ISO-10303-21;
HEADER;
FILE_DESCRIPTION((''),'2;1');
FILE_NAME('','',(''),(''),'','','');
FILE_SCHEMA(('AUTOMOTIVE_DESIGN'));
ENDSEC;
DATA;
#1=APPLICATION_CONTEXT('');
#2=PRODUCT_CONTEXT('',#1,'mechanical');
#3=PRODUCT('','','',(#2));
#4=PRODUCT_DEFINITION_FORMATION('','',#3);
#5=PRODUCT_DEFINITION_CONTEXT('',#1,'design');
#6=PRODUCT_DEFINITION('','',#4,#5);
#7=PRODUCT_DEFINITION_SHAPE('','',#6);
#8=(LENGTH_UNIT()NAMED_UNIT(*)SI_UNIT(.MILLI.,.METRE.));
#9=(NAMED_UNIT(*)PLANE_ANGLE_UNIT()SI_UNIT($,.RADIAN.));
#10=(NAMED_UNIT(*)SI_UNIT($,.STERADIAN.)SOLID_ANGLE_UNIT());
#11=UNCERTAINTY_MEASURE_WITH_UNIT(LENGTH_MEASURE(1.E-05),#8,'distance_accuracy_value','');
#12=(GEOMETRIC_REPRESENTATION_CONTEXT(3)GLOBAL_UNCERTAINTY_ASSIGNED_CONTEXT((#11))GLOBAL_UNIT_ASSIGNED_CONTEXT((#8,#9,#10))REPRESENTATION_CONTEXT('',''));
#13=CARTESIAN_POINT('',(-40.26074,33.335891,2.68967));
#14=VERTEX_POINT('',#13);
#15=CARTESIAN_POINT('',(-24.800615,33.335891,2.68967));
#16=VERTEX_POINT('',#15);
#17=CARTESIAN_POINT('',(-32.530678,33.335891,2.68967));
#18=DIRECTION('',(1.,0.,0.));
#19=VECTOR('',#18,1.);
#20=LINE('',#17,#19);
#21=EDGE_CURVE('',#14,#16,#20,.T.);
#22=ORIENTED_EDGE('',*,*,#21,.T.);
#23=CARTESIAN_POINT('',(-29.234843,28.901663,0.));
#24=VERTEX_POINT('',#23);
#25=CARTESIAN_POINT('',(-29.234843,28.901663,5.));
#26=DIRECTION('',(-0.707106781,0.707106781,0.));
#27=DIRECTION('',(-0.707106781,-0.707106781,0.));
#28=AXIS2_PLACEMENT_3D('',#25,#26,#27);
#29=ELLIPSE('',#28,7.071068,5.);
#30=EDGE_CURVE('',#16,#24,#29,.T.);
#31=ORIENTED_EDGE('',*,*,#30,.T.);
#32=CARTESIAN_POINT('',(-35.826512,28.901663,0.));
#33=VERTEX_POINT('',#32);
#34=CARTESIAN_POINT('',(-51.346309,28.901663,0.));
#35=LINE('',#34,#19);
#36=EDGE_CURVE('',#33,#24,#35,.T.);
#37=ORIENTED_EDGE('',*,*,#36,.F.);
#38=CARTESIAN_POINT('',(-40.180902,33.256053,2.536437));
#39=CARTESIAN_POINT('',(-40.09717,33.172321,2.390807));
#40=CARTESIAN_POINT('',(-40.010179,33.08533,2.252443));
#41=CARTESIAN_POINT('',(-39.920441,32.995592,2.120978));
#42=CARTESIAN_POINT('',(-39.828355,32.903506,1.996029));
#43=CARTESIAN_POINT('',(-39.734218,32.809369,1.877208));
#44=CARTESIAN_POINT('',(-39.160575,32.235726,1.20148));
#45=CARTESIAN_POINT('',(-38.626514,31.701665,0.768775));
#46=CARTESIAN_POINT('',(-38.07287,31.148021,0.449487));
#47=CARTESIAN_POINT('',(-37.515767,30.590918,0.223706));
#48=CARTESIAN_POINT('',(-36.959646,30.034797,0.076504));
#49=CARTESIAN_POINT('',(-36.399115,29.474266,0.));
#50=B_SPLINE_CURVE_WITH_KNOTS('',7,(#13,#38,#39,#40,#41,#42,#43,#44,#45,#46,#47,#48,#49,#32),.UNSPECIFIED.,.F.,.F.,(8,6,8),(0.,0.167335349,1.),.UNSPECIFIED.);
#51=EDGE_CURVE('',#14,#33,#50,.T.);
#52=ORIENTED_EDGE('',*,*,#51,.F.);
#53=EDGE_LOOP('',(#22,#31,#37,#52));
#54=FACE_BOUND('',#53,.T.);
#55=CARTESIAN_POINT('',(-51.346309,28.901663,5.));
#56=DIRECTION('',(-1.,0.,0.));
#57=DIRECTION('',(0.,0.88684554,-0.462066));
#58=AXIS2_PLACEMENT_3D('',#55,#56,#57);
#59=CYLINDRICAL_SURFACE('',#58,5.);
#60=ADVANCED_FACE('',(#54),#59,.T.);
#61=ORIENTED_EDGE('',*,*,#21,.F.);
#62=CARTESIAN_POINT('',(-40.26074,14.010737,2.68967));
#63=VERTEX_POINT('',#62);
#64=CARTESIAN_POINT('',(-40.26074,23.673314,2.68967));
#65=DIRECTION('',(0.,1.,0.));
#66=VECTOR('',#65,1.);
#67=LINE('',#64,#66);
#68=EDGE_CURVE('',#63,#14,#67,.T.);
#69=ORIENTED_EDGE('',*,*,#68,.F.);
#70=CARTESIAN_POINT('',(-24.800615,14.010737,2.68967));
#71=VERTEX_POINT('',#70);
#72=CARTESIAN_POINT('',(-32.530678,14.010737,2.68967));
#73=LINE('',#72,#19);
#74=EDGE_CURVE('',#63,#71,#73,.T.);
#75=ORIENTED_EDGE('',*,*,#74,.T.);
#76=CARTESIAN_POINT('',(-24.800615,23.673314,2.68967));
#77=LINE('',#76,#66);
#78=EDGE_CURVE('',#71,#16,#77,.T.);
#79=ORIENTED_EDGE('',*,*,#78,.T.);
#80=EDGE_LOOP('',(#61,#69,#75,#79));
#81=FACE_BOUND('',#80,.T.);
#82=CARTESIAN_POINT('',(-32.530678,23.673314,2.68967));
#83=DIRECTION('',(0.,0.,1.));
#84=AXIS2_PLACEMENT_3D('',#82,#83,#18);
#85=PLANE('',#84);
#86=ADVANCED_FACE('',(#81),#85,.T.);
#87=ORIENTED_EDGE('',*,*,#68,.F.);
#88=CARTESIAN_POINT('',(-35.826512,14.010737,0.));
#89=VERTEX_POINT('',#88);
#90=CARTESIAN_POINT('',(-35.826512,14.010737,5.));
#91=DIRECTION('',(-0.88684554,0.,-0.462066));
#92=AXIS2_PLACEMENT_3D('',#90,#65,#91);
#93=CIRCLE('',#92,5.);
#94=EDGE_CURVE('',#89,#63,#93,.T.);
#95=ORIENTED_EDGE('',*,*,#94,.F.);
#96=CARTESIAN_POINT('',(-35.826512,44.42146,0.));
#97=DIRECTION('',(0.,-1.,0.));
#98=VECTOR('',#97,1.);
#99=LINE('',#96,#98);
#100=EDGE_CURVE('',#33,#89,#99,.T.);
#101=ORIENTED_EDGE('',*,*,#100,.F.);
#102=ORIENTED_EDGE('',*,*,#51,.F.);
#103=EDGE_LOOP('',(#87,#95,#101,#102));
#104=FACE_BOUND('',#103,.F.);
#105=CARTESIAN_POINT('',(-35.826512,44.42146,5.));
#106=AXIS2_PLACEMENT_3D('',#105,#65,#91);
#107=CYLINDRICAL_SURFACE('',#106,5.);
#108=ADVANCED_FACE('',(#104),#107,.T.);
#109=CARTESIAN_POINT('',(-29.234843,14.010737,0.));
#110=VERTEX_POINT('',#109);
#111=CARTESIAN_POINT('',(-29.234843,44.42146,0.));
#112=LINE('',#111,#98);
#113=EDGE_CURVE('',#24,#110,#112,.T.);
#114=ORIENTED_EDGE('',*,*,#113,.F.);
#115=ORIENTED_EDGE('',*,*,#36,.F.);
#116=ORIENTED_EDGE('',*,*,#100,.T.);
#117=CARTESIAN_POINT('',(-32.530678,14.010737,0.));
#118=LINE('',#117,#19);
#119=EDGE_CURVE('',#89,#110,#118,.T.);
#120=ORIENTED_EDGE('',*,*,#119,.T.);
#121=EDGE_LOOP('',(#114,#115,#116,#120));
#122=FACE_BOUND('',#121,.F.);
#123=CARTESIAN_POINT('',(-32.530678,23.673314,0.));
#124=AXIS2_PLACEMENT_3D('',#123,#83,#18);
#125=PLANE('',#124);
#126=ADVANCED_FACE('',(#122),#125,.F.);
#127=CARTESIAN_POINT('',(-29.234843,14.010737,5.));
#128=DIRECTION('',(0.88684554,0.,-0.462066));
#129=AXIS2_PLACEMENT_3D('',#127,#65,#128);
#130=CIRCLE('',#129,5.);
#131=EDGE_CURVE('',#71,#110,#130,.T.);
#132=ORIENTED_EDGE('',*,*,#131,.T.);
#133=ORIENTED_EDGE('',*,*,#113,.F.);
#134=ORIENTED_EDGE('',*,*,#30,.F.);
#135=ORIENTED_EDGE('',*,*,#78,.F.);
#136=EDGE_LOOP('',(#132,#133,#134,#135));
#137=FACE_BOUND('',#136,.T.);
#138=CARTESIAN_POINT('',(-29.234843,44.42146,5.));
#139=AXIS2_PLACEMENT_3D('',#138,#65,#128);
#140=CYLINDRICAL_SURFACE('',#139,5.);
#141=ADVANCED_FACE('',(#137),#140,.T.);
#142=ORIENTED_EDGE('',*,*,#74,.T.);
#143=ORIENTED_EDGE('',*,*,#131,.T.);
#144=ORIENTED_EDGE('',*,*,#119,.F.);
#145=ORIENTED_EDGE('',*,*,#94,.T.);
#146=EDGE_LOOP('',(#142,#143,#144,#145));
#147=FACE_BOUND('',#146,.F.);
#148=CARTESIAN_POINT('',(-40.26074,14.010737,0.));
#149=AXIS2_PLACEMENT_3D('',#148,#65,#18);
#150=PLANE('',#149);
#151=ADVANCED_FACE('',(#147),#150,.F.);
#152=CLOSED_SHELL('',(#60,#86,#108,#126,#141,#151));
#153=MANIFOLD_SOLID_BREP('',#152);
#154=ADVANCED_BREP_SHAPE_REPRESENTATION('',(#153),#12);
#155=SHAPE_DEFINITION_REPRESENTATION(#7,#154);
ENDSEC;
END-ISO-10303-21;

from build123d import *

# Parameters (mm, degrees)
F0_W        = 15.4601242393
F0_H        = 19.3251539022
F1_DEPTH    = 2.68967
F2_T1_DEPTH = 37.6312627369
F2_T3_DEPTH = 41.4962923997


# Not quite as in the source:
# - a fillet or chamfer that OpenCascade refuses, or shapes differently, is made with other operations: its cross-section is extruded or revolved along the edge and cut away or added


with BuildPart() as f1:
    # F0 (on Top) → F1 (new body)
    with BuildSketch(Plane.XY):
        with Locations((-32.5306775048, 23.6733136699)):
            Rectangle(F0_W, F0_H)
    extrude(amount=F1_DEPTH)

    # F2: fillet of radius 5 on 3 edges, made by hand

    # F2_s2 → F2_t1 (cut)
    with BuildSketch(Plane.YZ.offset(-51.3463088733)):
        with BuildLine():
            ThreePointArc((33.3358906209, 2.68967), (31.4947643464, 0.7249766083), (28.9016629214, 0))
            Line((28.9016629214, 0), (33.3358906209, 0))
            Line((33.3358906209, 0), (33.3358906209, 2.68967))
        make_face()
    extrude(amount=F2_T1_DEPTH, mode=Mode.SUBTRACT)

    # F2_s4 → F2_t3 (cut)
    with BuildSketch(Plane.XZ.offset(-44.4214598697)):
        with BuildLine():
            ThreePointArc((-24.8006153852, 2.68967), (-26.6417416597, 0.7249766083), (-29.2348430847, 0))
            Line((-29.2348430847, 0), (-24.8006153852, 0))
            Line((-24.8006153852, 0), (-24.8006153852, 2.68967))
        make_face()
        with BuildLine():
            ThreePointArc((-40.2607396245, 2.68967), (-38.4196133499, 0.7249766083), (-35.826511925, 0))
            Line((-35.826511925, 0), (-40.2607396245, 0))
            Line((-40.2607396245, 0), (-40.2607396245, 2.68967))
        make_face()
    extrude(amount=F2_T3_DEPTH, mode=Mode.SUBTRACT)


solid = f1.part
